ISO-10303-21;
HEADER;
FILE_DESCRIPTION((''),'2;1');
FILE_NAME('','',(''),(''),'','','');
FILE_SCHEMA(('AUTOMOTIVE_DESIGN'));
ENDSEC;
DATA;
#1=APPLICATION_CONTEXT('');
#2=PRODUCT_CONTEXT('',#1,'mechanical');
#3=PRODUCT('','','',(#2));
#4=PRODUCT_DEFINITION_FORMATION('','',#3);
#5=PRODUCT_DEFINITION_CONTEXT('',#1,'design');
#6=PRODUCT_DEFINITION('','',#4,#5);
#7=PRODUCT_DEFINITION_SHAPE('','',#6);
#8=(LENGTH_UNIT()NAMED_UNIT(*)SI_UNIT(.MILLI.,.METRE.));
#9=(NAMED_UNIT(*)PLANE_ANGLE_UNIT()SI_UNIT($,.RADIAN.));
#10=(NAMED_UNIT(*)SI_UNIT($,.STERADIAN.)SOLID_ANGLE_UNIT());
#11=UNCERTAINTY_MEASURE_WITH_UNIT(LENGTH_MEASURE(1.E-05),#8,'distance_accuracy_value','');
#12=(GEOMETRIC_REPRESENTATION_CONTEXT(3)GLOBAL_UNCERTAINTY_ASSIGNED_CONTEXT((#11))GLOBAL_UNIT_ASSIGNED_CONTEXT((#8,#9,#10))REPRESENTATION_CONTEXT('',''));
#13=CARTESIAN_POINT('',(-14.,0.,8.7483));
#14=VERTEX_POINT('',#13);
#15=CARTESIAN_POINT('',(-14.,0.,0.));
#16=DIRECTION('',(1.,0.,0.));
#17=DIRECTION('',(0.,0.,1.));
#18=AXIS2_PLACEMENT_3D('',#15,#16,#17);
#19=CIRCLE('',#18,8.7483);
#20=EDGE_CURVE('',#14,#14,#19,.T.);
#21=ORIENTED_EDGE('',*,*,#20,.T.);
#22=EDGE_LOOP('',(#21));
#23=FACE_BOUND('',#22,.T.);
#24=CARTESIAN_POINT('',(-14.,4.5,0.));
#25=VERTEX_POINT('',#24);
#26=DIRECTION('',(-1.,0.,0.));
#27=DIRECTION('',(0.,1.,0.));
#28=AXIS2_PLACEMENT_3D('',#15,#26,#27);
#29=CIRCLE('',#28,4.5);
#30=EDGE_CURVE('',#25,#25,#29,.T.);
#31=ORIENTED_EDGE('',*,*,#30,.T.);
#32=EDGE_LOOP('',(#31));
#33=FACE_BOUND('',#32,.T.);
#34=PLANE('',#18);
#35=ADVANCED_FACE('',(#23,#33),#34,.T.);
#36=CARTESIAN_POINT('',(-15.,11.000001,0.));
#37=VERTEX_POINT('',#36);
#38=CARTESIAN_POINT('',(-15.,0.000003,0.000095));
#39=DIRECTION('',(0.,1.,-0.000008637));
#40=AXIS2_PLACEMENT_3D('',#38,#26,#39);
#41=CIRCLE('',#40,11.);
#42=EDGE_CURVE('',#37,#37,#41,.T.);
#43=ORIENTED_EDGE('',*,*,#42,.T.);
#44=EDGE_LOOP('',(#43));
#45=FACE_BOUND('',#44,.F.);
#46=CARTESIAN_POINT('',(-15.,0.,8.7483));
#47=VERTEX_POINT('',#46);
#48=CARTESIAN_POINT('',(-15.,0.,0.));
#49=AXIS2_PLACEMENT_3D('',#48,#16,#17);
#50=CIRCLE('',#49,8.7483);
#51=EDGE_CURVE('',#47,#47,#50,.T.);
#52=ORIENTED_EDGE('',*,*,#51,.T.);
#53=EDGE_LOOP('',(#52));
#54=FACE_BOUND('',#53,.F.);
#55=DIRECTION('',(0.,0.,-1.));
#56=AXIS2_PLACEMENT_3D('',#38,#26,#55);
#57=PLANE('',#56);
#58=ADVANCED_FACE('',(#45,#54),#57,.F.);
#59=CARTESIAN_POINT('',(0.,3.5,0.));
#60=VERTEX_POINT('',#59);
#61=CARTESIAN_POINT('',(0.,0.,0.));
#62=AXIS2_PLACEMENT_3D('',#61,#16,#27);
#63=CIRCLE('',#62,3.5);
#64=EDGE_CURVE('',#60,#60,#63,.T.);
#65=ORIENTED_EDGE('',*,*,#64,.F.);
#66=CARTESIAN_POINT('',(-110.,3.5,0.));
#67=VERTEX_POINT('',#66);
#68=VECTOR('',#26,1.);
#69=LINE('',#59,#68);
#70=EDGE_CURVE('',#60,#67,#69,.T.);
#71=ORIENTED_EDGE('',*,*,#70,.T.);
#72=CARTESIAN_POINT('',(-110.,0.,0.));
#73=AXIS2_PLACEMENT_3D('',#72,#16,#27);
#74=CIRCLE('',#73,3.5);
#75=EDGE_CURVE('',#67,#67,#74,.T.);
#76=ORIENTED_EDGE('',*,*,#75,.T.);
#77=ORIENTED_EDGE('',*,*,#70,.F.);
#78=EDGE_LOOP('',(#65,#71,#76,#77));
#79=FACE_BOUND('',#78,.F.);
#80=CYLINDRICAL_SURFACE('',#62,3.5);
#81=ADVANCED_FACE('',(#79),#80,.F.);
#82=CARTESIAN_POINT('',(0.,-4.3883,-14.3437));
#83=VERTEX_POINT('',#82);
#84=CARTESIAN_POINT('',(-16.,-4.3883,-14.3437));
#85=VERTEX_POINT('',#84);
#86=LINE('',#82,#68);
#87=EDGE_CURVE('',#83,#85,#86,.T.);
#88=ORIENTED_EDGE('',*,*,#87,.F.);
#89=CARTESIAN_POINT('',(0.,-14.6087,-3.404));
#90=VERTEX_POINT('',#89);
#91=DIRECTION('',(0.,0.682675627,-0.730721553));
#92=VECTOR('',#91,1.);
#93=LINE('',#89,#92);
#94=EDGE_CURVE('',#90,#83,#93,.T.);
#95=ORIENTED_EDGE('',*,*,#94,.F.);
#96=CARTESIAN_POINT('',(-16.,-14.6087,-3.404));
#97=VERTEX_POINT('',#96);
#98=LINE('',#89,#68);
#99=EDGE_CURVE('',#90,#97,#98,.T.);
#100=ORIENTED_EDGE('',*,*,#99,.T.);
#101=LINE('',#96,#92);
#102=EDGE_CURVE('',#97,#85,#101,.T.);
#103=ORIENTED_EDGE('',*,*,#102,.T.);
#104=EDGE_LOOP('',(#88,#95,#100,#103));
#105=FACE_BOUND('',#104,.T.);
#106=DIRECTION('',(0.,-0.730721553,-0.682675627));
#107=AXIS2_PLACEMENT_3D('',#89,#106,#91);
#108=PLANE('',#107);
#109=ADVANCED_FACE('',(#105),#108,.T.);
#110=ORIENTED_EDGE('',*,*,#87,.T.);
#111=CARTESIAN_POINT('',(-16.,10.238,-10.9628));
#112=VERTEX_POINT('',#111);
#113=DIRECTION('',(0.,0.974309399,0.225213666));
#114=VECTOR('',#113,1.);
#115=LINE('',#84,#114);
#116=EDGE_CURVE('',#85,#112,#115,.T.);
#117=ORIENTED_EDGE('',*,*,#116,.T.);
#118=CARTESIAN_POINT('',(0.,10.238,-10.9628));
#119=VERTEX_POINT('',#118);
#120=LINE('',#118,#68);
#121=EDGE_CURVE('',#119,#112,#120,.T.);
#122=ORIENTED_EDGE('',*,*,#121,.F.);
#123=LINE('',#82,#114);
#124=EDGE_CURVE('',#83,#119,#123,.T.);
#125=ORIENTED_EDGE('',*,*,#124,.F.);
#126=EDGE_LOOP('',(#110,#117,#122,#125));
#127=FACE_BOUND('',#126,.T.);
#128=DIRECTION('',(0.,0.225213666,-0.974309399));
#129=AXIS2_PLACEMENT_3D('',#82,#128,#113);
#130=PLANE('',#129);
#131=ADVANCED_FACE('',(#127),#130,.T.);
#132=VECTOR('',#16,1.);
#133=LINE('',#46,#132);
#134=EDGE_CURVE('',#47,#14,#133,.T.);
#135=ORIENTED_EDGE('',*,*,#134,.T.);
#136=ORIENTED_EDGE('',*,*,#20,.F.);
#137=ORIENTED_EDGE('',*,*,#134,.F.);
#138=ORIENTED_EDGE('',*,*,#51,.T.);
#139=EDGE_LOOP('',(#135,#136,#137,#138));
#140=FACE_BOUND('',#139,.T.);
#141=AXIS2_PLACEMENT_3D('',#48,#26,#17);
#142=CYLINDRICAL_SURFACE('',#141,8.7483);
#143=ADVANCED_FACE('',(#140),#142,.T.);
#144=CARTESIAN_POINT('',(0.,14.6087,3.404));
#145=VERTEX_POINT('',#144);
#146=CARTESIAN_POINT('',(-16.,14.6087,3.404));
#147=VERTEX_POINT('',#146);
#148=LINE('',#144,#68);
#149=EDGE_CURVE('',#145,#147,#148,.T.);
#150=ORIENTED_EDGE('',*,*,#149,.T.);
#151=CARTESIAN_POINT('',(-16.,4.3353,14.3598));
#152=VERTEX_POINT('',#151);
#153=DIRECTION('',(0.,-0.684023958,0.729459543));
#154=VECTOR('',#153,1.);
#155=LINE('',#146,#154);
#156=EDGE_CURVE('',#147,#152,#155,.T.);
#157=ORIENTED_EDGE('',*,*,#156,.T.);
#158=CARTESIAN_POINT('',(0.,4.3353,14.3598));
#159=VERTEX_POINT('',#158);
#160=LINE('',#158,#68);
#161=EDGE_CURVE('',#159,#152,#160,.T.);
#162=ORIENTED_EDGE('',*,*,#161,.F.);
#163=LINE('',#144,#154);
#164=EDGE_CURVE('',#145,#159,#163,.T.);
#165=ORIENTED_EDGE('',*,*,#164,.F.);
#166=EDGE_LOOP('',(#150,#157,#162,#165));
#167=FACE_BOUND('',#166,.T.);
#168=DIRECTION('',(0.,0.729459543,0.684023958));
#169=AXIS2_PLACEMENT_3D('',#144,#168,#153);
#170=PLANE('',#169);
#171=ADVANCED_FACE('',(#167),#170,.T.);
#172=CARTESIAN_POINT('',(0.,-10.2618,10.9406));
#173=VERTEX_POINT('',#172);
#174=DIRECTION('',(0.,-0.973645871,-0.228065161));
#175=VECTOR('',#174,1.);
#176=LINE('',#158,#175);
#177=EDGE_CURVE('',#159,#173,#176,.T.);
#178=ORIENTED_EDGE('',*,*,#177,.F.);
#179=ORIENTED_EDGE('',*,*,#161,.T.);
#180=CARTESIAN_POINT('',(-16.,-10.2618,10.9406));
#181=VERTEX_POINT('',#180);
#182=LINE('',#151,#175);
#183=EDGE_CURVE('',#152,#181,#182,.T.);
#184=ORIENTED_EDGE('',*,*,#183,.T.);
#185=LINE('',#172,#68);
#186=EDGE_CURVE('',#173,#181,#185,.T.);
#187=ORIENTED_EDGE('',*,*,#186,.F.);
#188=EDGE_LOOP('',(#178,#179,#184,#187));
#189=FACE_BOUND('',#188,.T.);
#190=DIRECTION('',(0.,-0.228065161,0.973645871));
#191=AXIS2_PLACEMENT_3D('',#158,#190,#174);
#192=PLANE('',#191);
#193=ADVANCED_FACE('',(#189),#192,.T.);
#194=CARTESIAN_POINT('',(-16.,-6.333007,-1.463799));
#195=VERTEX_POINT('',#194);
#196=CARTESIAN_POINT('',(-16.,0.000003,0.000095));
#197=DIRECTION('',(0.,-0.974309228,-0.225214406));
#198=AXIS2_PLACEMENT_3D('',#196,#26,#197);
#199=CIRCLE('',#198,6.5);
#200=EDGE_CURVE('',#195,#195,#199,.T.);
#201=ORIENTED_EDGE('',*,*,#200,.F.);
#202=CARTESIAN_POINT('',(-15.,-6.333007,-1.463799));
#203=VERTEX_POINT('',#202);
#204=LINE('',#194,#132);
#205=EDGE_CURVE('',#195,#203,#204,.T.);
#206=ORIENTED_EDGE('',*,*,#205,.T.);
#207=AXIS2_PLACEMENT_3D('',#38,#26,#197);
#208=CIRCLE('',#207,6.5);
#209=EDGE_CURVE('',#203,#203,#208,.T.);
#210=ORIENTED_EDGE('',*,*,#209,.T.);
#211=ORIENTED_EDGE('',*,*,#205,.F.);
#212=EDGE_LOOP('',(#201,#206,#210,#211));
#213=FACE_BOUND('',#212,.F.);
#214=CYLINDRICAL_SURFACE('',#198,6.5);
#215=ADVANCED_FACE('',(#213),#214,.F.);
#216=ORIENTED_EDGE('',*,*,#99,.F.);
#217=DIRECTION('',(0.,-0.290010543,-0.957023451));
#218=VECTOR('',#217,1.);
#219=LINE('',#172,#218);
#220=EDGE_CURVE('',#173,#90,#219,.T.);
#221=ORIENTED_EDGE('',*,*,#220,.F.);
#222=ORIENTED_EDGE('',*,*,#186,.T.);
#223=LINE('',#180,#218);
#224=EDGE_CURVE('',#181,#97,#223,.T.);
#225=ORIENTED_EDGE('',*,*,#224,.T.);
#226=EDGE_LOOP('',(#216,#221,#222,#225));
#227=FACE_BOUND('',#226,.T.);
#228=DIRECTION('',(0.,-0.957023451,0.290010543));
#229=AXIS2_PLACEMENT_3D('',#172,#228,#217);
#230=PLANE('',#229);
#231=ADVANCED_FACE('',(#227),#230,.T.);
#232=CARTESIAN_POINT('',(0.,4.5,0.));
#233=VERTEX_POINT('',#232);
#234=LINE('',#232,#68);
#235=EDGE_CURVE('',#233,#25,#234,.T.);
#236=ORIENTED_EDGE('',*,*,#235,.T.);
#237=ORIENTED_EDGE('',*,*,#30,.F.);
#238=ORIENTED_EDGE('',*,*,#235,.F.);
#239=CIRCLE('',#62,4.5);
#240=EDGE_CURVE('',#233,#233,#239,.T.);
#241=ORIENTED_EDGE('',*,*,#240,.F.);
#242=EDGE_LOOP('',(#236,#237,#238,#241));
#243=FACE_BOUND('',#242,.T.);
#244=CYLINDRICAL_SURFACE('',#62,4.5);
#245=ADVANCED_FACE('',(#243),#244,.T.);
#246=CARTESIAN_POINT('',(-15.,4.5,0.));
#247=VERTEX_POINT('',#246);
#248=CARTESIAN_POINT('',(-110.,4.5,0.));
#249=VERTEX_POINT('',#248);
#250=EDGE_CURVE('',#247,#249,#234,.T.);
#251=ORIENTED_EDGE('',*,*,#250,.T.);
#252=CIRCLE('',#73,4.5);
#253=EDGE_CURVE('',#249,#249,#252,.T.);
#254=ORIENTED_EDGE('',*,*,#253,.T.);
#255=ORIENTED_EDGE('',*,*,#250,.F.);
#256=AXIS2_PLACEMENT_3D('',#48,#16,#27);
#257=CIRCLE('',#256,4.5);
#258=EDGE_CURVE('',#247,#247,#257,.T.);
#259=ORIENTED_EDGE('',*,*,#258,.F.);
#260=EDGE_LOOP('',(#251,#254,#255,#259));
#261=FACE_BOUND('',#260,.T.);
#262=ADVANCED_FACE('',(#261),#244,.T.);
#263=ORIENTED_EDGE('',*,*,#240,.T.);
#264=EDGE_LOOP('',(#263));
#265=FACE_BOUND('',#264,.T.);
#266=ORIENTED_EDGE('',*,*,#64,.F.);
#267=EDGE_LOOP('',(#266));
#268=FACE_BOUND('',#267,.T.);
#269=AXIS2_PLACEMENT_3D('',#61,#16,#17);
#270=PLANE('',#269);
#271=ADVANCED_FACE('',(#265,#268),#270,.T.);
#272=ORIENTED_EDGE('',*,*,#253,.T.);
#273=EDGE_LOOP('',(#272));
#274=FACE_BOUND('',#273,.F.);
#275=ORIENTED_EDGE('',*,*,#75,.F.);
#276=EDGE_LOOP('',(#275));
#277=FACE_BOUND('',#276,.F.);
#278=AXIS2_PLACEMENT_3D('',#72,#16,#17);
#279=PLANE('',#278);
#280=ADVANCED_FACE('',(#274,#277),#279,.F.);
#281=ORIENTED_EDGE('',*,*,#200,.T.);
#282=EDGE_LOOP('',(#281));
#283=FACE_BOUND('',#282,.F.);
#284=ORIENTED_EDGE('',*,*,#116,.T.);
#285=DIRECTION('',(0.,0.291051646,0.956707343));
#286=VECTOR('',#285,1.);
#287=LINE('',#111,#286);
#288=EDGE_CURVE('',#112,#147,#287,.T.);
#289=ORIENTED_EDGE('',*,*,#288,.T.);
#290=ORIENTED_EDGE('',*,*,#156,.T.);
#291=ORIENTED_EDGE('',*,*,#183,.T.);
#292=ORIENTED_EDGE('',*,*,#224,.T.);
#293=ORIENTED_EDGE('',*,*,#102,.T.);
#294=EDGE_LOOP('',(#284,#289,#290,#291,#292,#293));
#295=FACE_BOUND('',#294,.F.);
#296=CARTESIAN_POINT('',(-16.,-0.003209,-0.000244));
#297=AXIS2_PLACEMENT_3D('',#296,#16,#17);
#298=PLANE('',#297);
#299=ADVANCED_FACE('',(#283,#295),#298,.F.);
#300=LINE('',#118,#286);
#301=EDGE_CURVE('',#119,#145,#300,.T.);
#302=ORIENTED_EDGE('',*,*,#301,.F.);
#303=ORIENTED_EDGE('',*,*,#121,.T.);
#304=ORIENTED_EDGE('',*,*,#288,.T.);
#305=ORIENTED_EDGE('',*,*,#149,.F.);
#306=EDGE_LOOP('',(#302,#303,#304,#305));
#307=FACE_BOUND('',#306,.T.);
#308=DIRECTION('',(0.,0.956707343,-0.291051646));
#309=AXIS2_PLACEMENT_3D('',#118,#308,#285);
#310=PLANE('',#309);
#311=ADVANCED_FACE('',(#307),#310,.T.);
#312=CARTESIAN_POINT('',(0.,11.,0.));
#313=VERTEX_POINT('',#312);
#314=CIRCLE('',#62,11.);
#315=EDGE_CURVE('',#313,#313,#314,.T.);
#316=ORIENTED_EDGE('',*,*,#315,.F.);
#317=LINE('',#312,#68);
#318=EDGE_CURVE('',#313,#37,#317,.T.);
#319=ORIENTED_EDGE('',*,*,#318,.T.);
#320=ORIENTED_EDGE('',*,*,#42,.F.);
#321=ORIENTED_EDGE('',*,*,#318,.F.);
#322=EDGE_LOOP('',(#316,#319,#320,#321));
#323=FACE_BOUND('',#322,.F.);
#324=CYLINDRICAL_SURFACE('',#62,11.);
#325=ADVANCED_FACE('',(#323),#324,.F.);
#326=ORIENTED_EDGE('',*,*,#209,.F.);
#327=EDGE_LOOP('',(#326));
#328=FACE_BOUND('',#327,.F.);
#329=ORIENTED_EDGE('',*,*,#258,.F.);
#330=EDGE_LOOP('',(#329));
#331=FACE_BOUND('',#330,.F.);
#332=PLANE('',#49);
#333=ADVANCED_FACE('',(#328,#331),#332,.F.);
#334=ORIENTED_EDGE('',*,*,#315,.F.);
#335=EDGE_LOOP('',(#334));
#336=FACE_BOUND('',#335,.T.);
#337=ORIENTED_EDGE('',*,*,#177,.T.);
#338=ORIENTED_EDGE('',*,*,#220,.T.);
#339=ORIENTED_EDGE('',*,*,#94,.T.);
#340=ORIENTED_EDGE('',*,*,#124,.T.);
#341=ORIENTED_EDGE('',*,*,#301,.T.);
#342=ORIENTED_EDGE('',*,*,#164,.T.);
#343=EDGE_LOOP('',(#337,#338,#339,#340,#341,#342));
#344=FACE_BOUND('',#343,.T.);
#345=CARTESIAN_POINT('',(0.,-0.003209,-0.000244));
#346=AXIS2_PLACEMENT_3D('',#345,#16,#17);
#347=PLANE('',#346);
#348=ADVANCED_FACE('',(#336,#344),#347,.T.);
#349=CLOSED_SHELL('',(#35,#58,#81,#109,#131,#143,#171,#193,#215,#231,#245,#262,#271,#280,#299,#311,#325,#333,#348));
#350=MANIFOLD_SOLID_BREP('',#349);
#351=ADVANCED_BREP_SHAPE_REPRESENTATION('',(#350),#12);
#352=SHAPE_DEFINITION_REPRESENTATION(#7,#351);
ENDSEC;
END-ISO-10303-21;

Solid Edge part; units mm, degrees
sketch "Sketch1" plane through (0, 0, 0) normal (1, 0, 0) x (0, 1, 0)
  circle A0 centre (0, 0) radius 11
  line L0 (10.238, -10.9628) -> (14.6087, 3.404)
  line L1 (14.6087, 3.404) -> (4.3353, 14.3598)
  line L2 (4.3353, 14.3598) -> (-10.2618, 10.9406)
  line L3 (-10.2618, 10.9406) -> (-14.6087, -3.404)
  line L4 (-14.6087, -3.404) -> (-4.3883, -14.3437)
  line L5 (-4.3883, -14.3437) -> (10.238, -10.9628)
extrude "Protrusion1" add sketch "Sketch1" against normal blind 16
cosmetic_thread "Thread1" size "Tr 24 x 2"
sketch "Sketch2" plane through (-16, 0, 0.0081) normal (-1, 0, 0) x (0, -0.9743092, -0.2252144)
  circle A0 centre (0.0018, -0.0078) radius 6.5
  circle A1 centre (0.0018, -0.0078) radius 11
extrude "ExtrudedProtrusion_2" add sketch "Sketch2" against normal blind 1
sketch "Sketch3" plane through (0, 0, 0) normal (1, 0, 0) x (0, 1, 0)
  circle A0 centre (0, 0) radius 3.5
  circle A1 centre (0, 0) radius 4.5
extrude "ExtrudedProtrusion_4" add sketch "Sketch3" against normal blind 110
sketch "Sketch4" plane through (-15, 0, 0) normal (1, 0, 0) x (0, 0, 1)
  circle A0 centre (0, 0) radius 8.7483
  circle A1 centre (0, 0) radius 4.5
extrude "ExtrudedProtrusion_5" add sketch "Sketch4" along normal blind 1
cosmetic_thread "Thread_3" size "M9" thread depth 15
